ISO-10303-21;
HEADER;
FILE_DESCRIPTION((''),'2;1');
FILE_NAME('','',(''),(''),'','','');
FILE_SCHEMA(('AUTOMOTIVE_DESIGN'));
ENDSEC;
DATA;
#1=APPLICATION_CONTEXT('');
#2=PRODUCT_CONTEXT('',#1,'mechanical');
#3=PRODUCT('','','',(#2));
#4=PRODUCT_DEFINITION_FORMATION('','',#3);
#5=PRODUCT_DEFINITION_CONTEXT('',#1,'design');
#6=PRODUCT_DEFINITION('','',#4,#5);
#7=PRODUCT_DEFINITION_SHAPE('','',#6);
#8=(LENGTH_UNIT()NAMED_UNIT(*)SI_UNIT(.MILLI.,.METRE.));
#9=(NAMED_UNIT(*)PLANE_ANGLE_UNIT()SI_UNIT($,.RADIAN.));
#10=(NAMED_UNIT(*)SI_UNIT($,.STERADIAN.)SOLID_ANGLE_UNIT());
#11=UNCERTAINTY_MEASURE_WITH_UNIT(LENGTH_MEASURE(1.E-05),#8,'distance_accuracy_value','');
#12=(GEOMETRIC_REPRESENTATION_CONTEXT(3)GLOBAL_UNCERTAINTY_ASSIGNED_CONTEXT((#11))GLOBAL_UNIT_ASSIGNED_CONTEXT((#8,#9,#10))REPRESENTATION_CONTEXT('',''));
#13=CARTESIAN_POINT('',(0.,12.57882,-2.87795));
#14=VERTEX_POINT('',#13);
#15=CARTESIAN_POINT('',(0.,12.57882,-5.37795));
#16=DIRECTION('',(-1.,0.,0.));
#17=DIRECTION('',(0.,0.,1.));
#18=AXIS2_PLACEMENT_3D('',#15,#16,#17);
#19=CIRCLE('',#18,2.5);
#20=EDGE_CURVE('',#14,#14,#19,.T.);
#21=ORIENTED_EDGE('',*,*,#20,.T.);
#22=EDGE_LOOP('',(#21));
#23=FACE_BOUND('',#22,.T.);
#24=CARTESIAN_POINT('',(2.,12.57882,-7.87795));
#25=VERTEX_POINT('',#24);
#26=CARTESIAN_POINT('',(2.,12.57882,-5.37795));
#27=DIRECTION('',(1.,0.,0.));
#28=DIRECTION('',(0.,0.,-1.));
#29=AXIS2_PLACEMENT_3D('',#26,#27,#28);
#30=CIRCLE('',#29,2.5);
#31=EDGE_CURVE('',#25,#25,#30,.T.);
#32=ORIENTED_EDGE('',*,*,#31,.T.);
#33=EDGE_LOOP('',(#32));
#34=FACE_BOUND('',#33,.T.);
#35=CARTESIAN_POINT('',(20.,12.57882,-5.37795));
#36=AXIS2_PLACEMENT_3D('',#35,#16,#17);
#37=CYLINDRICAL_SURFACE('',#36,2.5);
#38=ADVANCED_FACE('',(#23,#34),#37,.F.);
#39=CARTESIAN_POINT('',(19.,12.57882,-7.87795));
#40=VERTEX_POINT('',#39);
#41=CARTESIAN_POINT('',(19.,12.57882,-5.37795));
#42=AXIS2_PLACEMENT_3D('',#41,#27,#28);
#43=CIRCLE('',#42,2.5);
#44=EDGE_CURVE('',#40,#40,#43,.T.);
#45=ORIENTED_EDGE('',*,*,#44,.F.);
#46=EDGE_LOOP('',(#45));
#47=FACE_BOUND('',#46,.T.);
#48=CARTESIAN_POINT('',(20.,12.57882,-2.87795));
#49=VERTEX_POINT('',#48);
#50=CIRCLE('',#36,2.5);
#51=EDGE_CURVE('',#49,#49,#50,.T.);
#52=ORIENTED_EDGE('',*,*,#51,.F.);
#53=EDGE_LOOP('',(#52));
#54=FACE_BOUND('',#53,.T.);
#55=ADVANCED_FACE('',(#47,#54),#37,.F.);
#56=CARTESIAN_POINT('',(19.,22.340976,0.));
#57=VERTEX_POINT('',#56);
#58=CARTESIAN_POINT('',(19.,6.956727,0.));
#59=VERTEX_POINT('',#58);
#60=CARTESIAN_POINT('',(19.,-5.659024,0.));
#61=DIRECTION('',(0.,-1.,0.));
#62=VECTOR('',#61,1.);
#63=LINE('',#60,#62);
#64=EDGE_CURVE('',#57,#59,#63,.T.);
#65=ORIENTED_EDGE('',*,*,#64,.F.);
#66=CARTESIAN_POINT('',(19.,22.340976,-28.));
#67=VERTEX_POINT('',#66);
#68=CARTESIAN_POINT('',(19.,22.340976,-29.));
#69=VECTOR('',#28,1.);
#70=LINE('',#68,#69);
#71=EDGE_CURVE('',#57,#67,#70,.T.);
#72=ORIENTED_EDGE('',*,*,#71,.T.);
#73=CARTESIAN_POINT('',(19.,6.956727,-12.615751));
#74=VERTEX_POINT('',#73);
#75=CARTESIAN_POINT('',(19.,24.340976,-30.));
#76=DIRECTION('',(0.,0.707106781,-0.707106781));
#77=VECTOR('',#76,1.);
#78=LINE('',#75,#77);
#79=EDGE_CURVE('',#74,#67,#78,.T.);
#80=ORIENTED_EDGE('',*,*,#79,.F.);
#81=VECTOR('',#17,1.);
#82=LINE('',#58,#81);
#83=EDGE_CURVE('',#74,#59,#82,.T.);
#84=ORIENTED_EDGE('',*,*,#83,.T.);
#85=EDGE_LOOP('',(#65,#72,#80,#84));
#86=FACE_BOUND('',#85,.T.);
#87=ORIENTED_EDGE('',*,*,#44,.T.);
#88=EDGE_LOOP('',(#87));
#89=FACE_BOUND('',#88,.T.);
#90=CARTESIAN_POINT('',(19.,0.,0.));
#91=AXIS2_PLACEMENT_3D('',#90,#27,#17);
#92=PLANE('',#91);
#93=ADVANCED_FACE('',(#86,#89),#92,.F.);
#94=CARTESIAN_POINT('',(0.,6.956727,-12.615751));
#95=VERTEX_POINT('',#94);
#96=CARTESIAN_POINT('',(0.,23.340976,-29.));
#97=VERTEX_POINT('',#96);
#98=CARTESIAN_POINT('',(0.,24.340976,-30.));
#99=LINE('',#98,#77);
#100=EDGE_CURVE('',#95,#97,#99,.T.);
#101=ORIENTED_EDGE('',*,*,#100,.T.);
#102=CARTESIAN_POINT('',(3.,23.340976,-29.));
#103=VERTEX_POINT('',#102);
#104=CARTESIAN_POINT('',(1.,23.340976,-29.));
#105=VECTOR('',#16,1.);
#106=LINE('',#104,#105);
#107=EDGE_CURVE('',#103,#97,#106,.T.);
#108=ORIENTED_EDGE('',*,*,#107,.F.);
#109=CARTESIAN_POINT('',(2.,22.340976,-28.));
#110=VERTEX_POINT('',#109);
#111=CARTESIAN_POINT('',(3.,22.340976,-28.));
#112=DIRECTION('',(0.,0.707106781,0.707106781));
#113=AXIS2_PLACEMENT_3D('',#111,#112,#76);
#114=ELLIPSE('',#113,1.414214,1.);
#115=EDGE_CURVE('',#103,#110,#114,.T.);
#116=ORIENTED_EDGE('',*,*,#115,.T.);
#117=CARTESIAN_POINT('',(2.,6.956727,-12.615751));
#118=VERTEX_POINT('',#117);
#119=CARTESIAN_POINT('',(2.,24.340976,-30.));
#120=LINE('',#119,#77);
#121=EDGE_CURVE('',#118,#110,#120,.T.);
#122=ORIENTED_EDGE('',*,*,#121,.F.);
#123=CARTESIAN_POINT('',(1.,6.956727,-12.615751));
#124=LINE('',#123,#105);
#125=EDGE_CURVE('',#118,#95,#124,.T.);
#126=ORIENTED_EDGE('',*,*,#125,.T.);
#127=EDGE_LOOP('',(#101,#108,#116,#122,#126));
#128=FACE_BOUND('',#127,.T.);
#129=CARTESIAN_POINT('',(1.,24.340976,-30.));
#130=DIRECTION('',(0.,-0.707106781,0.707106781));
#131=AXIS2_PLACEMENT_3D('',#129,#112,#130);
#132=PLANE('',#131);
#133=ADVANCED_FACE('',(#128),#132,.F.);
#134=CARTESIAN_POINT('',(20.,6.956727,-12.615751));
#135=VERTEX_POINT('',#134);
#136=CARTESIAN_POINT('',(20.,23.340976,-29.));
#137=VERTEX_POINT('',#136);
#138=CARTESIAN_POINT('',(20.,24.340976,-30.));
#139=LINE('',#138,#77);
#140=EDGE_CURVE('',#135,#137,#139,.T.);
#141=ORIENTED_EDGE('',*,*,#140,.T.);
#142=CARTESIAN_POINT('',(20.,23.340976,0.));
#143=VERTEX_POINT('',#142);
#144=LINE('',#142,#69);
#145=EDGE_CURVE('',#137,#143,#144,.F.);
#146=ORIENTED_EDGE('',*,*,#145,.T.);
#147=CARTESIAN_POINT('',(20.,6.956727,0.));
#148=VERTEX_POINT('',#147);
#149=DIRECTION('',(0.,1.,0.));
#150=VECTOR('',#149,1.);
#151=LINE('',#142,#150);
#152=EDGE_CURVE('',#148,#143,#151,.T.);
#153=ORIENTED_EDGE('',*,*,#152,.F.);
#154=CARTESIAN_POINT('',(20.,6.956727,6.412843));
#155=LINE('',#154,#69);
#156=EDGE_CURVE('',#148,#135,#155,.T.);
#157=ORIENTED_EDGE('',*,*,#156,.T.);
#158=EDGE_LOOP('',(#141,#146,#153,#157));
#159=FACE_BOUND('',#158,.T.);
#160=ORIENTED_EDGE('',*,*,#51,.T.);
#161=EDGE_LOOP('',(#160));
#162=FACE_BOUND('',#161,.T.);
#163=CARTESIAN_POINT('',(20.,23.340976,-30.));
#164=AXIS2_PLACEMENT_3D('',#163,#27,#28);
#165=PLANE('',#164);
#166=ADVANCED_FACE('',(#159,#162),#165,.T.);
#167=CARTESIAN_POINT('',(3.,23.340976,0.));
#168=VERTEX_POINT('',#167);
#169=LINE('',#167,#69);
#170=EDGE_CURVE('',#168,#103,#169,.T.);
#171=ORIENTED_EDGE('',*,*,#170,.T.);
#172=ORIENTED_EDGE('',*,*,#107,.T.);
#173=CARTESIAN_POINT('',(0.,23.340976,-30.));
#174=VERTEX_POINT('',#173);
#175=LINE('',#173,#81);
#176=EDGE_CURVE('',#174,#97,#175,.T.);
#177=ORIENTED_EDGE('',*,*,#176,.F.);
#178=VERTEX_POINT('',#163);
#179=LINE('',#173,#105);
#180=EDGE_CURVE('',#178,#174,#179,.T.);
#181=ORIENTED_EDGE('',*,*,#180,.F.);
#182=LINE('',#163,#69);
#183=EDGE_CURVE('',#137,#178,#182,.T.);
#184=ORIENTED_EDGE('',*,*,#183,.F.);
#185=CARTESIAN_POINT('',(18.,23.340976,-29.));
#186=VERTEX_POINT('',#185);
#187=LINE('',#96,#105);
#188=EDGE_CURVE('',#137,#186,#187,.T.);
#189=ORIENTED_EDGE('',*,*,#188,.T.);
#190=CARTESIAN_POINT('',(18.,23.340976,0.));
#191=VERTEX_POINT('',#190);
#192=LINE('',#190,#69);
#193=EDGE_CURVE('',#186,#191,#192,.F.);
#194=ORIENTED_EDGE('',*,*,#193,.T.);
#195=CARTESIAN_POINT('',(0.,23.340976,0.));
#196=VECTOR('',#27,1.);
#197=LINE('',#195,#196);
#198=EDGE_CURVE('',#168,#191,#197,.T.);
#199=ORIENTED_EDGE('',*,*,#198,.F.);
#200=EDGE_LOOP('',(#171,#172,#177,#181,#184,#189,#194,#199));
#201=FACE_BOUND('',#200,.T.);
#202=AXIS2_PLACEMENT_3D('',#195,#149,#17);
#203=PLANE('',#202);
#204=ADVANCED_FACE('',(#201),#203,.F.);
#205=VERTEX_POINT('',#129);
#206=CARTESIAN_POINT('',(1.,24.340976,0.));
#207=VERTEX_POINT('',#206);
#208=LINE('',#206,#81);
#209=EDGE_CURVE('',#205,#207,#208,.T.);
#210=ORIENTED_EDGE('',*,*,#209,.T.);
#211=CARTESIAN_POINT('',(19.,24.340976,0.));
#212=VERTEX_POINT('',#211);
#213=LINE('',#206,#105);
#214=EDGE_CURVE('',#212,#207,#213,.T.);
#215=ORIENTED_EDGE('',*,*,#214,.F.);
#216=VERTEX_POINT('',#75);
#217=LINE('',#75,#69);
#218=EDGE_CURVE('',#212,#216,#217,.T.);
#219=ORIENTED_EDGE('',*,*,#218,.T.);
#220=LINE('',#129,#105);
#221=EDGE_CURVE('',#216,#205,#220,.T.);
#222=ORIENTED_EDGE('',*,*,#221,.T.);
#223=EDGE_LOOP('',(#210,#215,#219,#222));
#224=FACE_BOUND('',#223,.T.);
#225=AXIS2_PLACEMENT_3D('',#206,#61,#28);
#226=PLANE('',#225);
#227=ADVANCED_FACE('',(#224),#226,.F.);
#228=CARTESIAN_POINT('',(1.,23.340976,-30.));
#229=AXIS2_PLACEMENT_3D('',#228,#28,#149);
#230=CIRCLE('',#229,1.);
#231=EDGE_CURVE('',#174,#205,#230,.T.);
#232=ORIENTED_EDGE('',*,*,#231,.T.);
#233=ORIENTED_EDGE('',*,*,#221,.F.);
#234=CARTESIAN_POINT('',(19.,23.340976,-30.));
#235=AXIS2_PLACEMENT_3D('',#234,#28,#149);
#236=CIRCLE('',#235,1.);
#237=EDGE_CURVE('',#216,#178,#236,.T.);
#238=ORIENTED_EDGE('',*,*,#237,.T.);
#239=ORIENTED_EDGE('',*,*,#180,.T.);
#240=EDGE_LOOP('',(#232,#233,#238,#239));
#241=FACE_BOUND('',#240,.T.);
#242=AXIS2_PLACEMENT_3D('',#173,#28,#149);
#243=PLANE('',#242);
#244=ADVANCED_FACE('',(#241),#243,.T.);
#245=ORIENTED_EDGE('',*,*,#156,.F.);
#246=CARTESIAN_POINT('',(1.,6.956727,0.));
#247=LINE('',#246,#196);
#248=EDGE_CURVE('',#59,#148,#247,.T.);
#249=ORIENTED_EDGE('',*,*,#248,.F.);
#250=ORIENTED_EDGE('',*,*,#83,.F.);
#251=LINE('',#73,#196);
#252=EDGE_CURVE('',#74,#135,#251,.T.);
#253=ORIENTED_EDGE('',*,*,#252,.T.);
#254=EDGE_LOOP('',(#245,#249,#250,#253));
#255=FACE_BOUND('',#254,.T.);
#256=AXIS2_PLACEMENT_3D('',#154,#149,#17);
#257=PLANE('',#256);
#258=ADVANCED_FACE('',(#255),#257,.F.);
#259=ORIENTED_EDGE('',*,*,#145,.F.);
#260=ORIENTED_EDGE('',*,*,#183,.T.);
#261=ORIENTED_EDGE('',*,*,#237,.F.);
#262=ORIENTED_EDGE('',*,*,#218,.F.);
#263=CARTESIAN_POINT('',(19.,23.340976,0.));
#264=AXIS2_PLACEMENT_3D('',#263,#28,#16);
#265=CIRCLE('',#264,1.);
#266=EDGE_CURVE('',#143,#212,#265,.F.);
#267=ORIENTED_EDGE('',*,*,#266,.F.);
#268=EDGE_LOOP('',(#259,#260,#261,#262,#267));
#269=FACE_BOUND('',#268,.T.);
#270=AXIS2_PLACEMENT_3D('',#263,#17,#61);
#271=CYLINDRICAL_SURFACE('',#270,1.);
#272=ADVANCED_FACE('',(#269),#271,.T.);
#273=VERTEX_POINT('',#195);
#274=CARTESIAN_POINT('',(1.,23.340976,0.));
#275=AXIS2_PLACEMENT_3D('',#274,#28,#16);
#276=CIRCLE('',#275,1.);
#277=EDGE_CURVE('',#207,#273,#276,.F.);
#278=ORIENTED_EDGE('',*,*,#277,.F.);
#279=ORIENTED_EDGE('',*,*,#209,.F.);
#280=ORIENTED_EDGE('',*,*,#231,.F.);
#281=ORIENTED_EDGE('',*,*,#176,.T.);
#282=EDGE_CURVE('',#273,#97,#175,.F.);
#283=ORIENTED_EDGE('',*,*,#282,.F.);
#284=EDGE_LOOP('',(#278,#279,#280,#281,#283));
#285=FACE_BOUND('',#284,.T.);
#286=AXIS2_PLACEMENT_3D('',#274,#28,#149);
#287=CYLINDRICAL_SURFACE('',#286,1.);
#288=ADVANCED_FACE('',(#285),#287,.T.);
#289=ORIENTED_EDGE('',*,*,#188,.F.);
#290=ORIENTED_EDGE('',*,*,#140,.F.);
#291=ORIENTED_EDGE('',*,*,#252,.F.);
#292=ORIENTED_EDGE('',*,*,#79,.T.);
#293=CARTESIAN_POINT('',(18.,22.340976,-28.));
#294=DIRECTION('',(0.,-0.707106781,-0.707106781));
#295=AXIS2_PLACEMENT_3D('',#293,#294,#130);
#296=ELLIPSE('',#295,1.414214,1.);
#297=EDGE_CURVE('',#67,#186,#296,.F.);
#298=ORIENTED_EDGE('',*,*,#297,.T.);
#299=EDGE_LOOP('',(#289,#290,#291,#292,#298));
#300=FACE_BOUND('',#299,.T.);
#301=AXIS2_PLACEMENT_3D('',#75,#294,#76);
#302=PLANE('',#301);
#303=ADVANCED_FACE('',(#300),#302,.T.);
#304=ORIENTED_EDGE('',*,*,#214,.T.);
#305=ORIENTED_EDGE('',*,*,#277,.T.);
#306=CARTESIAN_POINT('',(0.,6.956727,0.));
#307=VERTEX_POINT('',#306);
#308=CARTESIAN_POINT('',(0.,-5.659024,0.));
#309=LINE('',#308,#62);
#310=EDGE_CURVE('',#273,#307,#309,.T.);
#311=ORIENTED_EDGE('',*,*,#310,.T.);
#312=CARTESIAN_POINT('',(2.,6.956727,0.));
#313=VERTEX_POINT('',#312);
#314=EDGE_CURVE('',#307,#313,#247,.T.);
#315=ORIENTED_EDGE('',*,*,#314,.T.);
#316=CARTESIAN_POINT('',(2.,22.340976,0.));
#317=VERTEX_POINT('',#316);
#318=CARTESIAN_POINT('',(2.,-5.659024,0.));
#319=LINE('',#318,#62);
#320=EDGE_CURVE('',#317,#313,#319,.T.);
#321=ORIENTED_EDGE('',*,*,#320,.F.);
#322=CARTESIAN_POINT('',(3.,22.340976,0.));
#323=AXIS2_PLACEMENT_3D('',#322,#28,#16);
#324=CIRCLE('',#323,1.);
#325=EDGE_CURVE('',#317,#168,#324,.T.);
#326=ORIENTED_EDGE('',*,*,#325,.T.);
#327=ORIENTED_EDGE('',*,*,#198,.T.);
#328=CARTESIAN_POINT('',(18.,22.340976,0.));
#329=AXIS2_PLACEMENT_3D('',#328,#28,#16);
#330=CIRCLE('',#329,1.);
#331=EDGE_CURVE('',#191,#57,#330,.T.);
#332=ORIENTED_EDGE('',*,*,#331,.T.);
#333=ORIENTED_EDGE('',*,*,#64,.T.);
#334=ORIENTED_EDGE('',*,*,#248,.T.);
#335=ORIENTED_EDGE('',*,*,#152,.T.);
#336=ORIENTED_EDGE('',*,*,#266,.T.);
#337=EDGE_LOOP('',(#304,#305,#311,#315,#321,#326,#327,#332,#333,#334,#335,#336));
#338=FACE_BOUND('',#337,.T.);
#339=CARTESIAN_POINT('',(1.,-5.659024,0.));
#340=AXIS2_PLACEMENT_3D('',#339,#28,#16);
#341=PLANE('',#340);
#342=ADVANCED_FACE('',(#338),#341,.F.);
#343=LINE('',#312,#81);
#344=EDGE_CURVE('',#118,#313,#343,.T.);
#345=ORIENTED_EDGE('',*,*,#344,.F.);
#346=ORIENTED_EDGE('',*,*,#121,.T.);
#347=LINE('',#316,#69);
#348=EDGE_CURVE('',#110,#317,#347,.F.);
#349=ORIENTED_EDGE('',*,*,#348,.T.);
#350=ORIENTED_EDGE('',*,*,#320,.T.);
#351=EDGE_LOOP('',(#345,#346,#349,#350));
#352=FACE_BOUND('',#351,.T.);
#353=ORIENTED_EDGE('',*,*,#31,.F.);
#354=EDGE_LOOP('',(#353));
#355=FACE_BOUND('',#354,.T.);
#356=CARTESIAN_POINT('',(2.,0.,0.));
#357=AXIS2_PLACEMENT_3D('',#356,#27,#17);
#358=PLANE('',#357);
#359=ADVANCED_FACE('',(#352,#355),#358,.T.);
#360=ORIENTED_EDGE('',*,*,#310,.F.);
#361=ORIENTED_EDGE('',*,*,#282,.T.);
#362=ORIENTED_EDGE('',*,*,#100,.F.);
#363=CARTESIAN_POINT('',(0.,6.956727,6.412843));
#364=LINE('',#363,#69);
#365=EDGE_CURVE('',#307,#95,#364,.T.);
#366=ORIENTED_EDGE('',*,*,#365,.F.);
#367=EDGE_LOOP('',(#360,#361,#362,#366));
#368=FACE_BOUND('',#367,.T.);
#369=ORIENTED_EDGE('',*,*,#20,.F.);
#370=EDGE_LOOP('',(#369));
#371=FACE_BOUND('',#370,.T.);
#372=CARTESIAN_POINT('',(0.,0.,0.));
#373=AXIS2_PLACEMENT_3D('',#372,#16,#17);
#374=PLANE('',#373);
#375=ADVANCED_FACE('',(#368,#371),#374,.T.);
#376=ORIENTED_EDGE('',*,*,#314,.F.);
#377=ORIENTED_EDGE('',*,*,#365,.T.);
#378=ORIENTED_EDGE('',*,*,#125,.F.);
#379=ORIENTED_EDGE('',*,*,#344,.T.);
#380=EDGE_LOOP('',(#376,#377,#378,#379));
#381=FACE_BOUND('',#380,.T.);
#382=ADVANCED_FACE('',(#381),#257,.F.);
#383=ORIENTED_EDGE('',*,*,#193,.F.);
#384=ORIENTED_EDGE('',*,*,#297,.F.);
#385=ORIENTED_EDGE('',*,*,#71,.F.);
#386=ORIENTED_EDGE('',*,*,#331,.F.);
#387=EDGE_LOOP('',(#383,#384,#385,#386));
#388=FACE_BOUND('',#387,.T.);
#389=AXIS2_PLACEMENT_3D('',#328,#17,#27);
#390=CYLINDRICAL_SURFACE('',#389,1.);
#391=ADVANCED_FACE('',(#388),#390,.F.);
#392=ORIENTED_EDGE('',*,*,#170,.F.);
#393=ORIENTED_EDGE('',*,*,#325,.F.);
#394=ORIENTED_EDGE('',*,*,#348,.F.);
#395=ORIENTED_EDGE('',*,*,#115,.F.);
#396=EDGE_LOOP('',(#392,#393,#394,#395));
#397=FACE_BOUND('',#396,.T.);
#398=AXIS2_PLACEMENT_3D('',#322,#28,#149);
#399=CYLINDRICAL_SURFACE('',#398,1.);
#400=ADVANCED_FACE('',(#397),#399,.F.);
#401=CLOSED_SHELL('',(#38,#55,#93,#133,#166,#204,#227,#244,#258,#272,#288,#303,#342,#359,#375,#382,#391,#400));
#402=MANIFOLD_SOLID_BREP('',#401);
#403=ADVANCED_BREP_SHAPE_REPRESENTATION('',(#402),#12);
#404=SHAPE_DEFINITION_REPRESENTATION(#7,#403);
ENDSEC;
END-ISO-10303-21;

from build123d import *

# Parameters (mm, degrees)
BOSS_EXTRUDE1_DEPTH     = 1
SKETCH2_W               = 20
SKETCH2_H               = 30
BOSS_EXTRUDE2_DEPTH     = 1
MIRROR1_START           = 1
MIRROR1_DEPTH           = 1
MIRROR1_START_2         = 19
MIRROR1_2_DEPTH         = 1
FILLET1_R               = 1
CUT_EXTRUDE1_DEPTH      = 44.502679315
CUT_EXTRUDE1_DEPTH_BACK = 44.502679315
SKETCH3_R               = 2.5
CUT_EXTRUDE2_DEPTH      = 44.502679315
CUT_EXTRUDE2_DEPTH_BACK = 44.502679315
SKETCH4_W               = 27.584874686
SKETCH4_H               = 17.882608418


# Read off the part's stored shape, not the designer's step: Mirror1
with BuildPart() as part:
    # Sketch1 → Boss-Extrude1 (new body)
    with BuildSketch(Plane(origin=(0, 0, 0), x_dir=(0, 0, -1), z_dir=(1, 0, 0))):
        Polygon((0, 24.340975897), (30, 24.340975897), (0, -5.659024103), align=None)
    extrude(amount=BOSS_EXTRUDE1_DEPTH)

    # Sketch2 → Boss-Extrude2 (add)
    with BuildSketch(Plane(origin=(0, 24.340975897, 0), x_dir=(1, 0, 0), z_dir=(0, 1, 0))):
        with Locations((10, 15)):
            Rectangle(SKETCH2_W, SKETCH2_H)
    extrude(amount=-BOSS_EXTRUDE2_DEPTH)

    # Mirror1 outline → Mirror1 (add)
    with BuildSketch(Plane.YZ.offset(MIRROR1_START)):
        Polygon((-5.659024103, 0), (23.340975897, -29), (23.340975897, 0), align=None)
    extrude(amount=MIRROR1_DEPTH)

    # Mirror1 2 outline → Mirror1 2 (add)
    with BuildSketch(Plane.YZ.offset(MIRROR1_START_2)):
        Polygon((-5.659024103, 0), (23.340975897, -29), (23.340975897, 0), align=None)
    extrude(amount=MIRROR1_2_DEPTH)

    # Fillet1
    fillet1_edges = [part.edges().sort_by_distance(p)[0] for p in [
        (20, 24.340975897, -15),
        (19, 23.340975897, -14.5),
        (0, 24.340975897, -15),
        (2, 23.340975897, -14.5),
    ]]
    fillet(fillet1_edges, radius=FILLET1_R - 0.0001)  # a hair under: the kernel refuses the full size

    # Sketch3 → Cut-Extrude1 (cut, two sides: drawn at the far end of the back side and taken through both)
    with BuildSketch(Plane.ZY.offset(-CUT_EXTRUDE1_DEPTH_BACK)):
        with Locations((-5.377949805, 12.578820342)):
            Circle(SKETCH3_R)
    extrude(amount=CUT_EXTRUDE1_DEPTH + CUT_EXTRUDE1_DEPTH_BACK, mode=Mode.SUBTRACT)

    # Sketch4 → Cut-Extrude2 (cut, two sides: drawn at the far end of the back side and taken through both)
    with BuildSketch(Plane.ZY.offset(-CUT_EXTRUDE2_DEPTH_BACK)):
        with Locations((-7.379594799, -1.984577464)):
            Rectangle(SKETCH4_W, SKETCH4_H)
    extrude(amount=CUT_EXTRUDE2_DEPTH + CUT_EXTRUDE2_DEPTH_BACK, mode=Mode.SUBTRACT)


solid = part.part
